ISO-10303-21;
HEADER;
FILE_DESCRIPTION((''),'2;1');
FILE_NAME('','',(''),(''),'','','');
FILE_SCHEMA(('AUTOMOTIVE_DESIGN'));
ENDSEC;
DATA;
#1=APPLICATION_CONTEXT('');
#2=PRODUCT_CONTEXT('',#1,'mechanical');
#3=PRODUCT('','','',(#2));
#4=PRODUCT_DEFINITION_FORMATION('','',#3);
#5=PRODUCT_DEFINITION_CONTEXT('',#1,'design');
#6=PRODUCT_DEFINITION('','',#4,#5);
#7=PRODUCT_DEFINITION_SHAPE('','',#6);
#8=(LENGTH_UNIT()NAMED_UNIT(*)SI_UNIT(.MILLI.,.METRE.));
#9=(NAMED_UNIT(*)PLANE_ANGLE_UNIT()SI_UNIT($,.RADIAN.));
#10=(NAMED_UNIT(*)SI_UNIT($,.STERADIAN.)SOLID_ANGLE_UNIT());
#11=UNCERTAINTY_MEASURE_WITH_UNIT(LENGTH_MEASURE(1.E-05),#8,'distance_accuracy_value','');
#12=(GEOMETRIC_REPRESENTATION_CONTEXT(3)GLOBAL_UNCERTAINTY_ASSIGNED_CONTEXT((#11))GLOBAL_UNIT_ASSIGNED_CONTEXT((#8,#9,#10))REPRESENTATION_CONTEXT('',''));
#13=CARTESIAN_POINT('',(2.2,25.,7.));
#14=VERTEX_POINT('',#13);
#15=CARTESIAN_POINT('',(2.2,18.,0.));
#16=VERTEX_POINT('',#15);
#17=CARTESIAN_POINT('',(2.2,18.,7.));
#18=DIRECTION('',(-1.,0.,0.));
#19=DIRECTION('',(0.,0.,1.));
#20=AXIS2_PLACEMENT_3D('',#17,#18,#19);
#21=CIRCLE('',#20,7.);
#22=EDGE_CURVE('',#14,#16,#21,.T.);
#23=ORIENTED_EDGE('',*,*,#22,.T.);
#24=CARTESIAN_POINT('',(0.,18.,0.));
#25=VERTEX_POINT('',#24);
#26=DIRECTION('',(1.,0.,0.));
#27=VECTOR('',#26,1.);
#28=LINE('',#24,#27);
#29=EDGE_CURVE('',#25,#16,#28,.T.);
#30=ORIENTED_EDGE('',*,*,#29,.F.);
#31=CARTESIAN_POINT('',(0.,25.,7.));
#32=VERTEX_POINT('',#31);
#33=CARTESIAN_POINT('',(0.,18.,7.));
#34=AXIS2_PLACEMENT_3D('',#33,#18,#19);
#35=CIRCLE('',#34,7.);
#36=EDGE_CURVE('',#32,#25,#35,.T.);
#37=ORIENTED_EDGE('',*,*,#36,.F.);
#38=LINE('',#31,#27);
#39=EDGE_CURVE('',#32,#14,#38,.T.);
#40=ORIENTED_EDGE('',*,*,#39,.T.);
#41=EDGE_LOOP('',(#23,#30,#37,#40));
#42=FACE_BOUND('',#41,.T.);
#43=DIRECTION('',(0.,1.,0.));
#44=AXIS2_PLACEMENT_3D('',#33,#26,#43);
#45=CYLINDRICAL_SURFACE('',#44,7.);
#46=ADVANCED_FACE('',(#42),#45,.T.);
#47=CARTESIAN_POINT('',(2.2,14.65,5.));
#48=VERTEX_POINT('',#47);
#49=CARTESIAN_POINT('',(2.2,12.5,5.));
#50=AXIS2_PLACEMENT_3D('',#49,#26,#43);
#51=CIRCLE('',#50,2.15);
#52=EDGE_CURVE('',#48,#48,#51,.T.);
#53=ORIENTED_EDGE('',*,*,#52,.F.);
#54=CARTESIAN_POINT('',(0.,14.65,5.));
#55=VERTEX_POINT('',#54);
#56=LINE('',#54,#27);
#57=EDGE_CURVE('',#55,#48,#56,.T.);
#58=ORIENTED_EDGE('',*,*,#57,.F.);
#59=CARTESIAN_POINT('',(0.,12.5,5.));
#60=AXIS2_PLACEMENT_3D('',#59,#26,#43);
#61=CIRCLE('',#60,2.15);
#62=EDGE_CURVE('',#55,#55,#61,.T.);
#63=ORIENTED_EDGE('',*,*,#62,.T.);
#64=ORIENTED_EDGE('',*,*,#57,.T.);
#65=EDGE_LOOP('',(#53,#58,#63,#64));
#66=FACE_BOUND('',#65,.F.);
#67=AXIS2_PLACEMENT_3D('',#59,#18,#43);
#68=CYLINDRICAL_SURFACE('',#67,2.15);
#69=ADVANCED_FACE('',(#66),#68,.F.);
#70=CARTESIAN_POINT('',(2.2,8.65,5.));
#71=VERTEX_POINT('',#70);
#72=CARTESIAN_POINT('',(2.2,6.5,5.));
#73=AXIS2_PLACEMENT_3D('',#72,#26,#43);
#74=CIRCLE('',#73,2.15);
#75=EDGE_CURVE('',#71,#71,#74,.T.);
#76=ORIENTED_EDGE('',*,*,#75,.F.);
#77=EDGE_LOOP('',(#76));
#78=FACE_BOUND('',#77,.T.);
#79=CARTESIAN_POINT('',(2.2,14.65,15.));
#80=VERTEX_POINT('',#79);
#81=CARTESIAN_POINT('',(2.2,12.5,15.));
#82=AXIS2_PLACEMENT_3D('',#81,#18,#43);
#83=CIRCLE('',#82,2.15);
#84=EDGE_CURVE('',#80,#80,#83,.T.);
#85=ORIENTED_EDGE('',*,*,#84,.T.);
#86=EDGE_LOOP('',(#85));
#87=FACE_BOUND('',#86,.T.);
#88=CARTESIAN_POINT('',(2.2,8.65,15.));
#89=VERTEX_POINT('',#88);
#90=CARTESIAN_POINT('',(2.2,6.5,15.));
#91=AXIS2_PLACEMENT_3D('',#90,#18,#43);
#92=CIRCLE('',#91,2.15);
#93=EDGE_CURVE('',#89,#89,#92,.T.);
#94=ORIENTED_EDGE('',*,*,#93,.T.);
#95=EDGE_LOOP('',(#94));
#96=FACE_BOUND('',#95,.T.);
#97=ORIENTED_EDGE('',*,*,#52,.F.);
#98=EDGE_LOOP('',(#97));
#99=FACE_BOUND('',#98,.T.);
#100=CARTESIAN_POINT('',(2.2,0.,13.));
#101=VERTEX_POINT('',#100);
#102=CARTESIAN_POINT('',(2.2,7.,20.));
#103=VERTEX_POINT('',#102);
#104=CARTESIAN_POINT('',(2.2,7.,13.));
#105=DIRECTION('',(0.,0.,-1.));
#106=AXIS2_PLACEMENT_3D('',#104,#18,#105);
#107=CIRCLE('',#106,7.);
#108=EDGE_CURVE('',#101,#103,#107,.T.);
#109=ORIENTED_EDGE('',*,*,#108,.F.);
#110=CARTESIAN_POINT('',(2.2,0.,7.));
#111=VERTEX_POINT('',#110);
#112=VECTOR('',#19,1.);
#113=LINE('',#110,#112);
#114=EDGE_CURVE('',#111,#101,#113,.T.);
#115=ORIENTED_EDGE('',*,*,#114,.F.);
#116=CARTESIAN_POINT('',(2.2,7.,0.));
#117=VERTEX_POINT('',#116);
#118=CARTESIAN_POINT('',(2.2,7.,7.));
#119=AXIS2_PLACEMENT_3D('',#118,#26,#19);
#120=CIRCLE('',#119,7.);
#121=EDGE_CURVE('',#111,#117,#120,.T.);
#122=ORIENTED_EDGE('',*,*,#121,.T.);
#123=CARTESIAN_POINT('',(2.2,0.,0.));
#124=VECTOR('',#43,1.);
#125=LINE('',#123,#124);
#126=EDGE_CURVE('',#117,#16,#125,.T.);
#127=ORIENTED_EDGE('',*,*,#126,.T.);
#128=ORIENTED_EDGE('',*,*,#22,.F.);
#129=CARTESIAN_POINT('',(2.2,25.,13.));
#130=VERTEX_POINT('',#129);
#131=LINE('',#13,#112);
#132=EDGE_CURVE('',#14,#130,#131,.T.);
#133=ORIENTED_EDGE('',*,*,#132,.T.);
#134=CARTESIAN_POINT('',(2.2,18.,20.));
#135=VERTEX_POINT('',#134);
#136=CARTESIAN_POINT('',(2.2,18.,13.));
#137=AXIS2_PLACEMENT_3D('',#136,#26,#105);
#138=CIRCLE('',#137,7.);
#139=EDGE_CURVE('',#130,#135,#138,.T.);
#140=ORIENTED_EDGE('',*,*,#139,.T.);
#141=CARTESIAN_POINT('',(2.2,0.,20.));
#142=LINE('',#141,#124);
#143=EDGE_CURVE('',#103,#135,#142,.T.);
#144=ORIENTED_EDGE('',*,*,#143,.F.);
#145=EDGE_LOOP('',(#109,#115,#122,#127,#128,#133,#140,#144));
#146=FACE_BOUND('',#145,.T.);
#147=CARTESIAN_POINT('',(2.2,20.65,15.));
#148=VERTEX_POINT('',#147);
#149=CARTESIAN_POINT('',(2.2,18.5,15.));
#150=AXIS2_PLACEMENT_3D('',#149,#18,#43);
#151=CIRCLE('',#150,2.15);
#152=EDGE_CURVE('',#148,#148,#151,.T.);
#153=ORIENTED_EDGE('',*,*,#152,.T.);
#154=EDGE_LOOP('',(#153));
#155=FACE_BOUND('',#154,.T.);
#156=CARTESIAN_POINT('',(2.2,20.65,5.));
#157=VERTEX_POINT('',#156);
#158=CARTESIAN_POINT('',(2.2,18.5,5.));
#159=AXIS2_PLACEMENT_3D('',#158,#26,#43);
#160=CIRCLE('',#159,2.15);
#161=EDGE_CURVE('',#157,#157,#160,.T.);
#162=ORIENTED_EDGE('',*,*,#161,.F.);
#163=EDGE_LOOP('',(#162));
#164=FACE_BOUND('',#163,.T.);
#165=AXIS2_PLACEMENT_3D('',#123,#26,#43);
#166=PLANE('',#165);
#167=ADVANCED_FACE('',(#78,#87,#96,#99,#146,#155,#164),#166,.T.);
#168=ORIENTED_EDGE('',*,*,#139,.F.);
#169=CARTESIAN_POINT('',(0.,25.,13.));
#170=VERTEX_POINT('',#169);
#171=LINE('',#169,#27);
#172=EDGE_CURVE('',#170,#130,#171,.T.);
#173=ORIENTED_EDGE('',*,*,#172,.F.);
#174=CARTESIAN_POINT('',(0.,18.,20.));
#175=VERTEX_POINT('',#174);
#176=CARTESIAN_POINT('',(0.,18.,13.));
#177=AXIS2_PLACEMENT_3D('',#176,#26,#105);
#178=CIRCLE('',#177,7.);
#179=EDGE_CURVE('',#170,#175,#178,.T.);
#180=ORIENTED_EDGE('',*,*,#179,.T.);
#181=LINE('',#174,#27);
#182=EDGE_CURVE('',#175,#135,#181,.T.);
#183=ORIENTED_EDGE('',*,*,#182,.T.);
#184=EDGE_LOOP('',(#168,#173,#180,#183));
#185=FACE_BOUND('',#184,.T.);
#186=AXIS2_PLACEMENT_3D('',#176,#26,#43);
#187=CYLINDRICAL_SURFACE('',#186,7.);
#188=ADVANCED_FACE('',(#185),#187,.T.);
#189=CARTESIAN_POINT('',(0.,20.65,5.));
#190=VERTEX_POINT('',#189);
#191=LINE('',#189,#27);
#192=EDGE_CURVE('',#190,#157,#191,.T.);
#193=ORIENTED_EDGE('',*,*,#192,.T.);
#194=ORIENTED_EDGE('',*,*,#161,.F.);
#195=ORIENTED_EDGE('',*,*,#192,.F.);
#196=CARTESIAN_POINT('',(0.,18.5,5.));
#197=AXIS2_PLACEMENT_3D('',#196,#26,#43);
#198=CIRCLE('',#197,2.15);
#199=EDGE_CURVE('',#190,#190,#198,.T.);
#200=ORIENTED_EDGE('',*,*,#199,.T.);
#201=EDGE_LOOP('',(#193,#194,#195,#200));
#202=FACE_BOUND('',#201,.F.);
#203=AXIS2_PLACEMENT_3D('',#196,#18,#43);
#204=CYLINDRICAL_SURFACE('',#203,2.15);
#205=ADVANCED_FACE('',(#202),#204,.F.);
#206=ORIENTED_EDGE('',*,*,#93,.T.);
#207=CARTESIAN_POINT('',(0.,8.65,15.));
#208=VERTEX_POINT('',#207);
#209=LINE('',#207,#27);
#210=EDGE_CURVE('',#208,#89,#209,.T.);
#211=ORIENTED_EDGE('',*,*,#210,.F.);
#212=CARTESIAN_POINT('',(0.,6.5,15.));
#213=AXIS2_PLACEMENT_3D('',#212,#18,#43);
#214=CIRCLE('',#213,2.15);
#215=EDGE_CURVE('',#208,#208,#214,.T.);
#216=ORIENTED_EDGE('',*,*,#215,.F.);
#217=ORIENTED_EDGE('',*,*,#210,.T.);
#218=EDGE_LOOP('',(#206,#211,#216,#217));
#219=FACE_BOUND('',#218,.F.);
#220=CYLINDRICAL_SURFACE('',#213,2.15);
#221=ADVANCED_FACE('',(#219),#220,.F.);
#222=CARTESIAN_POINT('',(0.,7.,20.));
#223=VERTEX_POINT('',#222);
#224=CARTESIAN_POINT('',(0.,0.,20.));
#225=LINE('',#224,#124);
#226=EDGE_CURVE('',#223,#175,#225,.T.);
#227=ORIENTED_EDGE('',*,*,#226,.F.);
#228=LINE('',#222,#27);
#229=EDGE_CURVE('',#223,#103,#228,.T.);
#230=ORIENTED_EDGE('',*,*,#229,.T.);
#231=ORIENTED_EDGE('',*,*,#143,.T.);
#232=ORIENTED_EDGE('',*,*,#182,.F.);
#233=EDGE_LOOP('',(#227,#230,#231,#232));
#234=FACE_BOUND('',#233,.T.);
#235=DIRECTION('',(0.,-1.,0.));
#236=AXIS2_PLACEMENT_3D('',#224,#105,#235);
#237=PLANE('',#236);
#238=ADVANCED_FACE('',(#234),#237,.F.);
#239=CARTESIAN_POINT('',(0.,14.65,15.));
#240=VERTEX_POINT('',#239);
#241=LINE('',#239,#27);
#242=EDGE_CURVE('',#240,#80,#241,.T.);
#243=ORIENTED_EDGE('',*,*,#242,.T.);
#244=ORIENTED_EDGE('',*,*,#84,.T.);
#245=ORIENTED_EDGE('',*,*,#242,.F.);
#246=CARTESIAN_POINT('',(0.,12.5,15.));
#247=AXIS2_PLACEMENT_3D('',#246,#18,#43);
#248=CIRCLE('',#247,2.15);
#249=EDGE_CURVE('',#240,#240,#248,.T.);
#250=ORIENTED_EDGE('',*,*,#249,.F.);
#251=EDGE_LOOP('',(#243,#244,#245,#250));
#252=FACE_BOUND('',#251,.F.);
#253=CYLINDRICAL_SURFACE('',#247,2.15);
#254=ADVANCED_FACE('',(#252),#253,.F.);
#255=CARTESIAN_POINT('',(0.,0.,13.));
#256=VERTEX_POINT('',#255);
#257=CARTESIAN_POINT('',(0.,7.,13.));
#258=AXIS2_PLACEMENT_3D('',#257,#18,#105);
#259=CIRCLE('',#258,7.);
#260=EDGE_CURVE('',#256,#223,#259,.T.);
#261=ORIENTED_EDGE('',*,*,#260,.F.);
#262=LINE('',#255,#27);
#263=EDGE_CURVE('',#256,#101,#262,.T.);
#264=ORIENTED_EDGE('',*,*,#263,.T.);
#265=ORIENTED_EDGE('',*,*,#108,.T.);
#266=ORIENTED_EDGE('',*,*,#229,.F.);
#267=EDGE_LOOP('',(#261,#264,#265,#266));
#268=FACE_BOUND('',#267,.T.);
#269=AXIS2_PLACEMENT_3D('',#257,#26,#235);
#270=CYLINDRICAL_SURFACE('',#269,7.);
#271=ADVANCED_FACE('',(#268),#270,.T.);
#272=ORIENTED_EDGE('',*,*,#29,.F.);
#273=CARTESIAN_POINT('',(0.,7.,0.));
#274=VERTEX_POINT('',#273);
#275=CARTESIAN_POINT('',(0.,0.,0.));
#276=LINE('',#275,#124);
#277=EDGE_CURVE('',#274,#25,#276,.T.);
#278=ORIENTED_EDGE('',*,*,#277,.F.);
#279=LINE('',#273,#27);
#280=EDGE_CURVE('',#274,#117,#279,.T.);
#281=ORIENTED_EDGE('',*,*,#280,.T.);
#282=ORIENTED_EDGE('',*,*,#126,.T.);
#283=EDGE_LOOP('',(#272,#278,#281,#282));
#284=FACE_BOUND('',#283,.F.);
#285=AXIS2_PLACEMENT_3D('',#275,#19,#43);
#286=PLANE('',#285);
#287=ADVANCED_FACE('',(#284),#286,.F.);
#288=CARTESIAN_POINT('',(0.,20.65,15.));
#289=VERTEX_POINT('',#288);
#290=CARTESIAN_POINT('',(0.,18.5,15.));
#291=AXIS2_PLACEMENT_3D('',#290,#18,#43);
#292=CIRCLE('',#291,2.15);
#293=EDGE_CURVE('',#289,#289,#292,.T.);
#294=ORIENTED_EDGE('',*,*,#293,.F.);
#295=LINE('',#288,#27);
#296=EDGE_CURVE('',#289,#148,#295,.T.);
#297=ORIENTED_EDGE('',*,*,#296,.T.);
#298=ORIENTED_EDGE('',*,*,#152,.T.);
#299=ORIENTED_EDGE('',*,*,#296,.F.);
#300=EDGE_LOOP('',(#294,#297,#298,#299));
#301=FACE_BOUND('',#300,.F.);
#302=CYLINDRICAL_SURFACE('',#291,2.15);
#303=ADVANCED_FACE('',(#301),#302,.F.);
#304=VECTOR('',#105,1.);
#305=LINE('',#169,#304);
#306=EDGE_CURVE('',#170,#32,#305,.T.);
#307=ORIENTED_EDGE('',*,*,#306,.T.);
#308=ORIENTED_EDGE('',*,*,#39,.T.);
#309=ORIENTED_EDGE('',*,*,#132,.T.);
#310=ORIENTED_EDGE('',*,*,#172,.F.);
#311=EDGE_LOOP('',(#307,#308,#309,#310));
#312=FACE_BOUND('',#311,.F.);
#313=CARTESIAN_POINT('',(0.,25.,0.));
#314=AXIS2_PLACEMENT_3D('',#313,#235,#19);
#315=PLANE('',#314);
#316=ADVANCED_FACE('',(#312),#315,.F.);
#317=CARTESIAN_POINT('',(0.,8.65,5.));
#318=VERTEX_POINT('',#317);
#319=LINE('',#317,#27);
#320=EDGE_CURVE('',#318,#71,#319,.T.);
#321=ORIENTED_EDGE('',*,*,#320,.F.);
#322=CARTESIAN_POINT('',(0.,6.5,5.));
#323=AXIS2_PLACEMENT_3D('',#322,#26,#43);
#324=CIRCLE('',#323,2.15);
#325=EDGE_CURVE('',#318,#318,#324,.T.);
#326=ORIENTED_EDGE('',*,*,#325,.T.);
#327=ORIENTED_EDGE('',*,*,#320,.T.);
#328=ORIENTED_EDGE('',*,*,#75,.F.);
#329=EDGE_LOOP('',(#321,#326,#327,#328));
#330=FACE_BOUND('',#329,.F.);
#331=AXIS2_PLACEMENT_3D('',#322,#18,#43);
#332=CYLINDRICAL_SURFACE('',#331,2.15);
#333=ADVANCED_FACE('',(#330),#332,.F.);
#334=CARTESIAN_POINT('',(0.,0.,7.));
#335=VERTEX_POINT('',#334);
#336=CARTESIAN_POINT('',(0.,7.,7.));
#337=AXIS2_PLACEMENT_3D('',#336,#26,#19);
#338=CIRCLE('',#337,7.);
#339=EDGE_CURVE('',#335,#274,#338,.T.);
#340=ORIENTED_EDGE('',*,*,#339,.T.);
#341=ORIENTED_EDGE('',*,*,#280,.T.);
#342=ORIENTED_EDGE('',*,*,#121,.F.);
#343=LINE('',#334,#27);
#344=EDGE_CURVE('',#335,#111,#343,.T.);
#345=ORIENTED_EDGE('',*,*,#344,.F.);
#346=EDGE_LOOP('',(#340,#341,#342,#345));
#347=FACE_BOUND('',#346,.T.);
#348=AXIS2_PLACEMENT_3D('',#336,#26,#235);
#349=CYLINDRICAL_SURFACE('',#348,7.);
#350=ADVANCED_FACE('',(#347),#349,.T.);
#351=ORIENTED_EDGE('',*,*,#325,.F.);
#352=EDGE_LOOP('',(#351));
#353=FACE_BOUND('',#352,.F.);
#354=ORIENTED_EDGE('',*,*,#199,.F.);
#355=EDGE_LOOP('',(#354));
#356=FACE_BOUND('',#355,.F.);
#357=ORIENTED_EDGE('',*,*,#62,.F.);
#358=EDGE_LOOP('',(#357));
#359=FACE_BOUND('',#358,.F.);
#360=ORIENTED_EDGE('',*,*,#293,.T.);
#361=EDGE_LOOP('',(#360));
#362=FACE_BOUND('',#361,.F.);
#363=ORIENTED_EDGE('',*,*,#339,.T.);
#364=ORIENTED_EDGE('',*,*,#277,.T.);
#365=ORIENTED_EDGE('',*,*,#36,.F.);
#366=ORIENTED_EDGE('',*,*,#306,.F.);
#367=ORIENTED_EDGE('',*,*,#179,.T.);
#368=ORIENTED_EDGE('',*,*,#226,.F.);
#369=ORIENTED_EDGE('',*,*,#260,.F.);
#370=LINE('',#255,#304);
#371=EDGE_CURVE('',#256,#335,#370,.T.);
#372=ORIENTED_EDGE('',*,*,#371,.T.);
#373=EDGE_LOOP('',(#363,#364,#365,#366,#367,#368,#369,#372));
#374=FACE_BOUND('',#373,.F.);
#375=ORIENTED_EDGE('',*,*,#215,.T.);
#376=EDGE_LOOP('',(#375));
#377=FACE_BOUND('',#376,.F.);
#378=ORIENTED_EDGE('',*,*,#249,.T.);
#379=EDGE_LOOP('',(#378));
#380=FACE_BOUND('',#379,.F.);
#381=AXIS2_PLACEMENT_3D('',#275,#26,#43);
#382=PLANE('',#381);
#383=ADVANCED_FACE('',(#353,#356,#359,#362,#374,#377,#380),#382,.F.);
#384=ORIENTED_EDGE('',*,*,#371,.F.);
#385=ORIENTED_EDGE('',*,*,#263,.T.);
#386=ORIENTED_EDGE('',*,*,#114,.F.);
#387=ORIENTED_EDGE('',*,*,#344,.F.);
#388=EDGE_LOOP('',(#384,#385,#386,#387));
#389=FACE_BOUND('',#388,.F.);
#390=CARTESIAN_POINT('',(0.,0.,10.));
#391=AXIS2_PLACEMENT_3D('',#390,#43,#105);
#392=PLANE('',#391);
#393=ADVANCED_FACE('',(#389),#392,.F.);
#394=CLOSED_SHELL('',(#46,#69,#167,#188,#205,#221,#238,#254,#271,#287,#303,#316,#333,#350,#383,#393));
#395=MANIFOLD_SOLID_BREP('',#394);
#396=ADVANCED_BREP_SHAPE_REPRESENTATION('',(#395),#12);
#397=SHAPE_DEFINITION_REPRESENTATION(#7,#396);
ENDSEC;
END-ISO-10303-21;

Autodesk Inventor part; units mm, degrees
ref_plane "YZ Plane" through (0, 0, 0) normal (1, 0, 0) x (0, 1, 0)
ref_plane "XZ Plane" through (0, 0, 0) normal (0, 1, 0) x (-1, 0, 0)
ref_plane "XY Plane" through (0, 0, 0) normal (0, 0, 1) x (1, 0, 0)
sketch "Esquisse11" plane through (0, 0, 0) normal (1, 0, 0) x (0, 1, 0)
  line L0 (0, 0) -> (25, 0)
  line L1 (25, 0) -> (25, 10)
  line L2 (25, 10) -> (0, 10)
  line L3 (0, 10) -> (0, 0)
  line L4 (12.5, 0) -> (12.5, 10) construction
  circle A0 centre (12.5, 5) radius 2.15
  line L5 (12.5, 5) -> (25, 5) construction
  circle A1 centre (18.5, 5) radius 2.15
  circle A2 centre (6.5, 5) radius 2.15
  circle A3 centre (12.5, 5) radius 2.15
  dimension "d118" = 25
  dimension "d119" = 10
  dimension "d120" = 5
  dimension "d121" = 4.3
  dimension "d124" = 6
  dimension "d127" = 6
extrude "Extrusion11" add sketch "Esquisse11" along normal blind 2.2
fillet "Congé7" radius 7 2 edges at (1.1, 0, 0) (1.1, 25, 0)
mirror "Symétrie2" about plane through (0, 25, 10) normal (0, 0, 1)
equation "\"d121\" = Holes"
equation "\"d130\" = Depth"
equation "\"d132\" = Rounding"
equation "\"Depth\" = 2.2"
equation "\"Holes\" = 4.3"
equation "\"Height\" = 0"
equation "\"Rounding\" = 7"
properties part number "BottomToBottom"
